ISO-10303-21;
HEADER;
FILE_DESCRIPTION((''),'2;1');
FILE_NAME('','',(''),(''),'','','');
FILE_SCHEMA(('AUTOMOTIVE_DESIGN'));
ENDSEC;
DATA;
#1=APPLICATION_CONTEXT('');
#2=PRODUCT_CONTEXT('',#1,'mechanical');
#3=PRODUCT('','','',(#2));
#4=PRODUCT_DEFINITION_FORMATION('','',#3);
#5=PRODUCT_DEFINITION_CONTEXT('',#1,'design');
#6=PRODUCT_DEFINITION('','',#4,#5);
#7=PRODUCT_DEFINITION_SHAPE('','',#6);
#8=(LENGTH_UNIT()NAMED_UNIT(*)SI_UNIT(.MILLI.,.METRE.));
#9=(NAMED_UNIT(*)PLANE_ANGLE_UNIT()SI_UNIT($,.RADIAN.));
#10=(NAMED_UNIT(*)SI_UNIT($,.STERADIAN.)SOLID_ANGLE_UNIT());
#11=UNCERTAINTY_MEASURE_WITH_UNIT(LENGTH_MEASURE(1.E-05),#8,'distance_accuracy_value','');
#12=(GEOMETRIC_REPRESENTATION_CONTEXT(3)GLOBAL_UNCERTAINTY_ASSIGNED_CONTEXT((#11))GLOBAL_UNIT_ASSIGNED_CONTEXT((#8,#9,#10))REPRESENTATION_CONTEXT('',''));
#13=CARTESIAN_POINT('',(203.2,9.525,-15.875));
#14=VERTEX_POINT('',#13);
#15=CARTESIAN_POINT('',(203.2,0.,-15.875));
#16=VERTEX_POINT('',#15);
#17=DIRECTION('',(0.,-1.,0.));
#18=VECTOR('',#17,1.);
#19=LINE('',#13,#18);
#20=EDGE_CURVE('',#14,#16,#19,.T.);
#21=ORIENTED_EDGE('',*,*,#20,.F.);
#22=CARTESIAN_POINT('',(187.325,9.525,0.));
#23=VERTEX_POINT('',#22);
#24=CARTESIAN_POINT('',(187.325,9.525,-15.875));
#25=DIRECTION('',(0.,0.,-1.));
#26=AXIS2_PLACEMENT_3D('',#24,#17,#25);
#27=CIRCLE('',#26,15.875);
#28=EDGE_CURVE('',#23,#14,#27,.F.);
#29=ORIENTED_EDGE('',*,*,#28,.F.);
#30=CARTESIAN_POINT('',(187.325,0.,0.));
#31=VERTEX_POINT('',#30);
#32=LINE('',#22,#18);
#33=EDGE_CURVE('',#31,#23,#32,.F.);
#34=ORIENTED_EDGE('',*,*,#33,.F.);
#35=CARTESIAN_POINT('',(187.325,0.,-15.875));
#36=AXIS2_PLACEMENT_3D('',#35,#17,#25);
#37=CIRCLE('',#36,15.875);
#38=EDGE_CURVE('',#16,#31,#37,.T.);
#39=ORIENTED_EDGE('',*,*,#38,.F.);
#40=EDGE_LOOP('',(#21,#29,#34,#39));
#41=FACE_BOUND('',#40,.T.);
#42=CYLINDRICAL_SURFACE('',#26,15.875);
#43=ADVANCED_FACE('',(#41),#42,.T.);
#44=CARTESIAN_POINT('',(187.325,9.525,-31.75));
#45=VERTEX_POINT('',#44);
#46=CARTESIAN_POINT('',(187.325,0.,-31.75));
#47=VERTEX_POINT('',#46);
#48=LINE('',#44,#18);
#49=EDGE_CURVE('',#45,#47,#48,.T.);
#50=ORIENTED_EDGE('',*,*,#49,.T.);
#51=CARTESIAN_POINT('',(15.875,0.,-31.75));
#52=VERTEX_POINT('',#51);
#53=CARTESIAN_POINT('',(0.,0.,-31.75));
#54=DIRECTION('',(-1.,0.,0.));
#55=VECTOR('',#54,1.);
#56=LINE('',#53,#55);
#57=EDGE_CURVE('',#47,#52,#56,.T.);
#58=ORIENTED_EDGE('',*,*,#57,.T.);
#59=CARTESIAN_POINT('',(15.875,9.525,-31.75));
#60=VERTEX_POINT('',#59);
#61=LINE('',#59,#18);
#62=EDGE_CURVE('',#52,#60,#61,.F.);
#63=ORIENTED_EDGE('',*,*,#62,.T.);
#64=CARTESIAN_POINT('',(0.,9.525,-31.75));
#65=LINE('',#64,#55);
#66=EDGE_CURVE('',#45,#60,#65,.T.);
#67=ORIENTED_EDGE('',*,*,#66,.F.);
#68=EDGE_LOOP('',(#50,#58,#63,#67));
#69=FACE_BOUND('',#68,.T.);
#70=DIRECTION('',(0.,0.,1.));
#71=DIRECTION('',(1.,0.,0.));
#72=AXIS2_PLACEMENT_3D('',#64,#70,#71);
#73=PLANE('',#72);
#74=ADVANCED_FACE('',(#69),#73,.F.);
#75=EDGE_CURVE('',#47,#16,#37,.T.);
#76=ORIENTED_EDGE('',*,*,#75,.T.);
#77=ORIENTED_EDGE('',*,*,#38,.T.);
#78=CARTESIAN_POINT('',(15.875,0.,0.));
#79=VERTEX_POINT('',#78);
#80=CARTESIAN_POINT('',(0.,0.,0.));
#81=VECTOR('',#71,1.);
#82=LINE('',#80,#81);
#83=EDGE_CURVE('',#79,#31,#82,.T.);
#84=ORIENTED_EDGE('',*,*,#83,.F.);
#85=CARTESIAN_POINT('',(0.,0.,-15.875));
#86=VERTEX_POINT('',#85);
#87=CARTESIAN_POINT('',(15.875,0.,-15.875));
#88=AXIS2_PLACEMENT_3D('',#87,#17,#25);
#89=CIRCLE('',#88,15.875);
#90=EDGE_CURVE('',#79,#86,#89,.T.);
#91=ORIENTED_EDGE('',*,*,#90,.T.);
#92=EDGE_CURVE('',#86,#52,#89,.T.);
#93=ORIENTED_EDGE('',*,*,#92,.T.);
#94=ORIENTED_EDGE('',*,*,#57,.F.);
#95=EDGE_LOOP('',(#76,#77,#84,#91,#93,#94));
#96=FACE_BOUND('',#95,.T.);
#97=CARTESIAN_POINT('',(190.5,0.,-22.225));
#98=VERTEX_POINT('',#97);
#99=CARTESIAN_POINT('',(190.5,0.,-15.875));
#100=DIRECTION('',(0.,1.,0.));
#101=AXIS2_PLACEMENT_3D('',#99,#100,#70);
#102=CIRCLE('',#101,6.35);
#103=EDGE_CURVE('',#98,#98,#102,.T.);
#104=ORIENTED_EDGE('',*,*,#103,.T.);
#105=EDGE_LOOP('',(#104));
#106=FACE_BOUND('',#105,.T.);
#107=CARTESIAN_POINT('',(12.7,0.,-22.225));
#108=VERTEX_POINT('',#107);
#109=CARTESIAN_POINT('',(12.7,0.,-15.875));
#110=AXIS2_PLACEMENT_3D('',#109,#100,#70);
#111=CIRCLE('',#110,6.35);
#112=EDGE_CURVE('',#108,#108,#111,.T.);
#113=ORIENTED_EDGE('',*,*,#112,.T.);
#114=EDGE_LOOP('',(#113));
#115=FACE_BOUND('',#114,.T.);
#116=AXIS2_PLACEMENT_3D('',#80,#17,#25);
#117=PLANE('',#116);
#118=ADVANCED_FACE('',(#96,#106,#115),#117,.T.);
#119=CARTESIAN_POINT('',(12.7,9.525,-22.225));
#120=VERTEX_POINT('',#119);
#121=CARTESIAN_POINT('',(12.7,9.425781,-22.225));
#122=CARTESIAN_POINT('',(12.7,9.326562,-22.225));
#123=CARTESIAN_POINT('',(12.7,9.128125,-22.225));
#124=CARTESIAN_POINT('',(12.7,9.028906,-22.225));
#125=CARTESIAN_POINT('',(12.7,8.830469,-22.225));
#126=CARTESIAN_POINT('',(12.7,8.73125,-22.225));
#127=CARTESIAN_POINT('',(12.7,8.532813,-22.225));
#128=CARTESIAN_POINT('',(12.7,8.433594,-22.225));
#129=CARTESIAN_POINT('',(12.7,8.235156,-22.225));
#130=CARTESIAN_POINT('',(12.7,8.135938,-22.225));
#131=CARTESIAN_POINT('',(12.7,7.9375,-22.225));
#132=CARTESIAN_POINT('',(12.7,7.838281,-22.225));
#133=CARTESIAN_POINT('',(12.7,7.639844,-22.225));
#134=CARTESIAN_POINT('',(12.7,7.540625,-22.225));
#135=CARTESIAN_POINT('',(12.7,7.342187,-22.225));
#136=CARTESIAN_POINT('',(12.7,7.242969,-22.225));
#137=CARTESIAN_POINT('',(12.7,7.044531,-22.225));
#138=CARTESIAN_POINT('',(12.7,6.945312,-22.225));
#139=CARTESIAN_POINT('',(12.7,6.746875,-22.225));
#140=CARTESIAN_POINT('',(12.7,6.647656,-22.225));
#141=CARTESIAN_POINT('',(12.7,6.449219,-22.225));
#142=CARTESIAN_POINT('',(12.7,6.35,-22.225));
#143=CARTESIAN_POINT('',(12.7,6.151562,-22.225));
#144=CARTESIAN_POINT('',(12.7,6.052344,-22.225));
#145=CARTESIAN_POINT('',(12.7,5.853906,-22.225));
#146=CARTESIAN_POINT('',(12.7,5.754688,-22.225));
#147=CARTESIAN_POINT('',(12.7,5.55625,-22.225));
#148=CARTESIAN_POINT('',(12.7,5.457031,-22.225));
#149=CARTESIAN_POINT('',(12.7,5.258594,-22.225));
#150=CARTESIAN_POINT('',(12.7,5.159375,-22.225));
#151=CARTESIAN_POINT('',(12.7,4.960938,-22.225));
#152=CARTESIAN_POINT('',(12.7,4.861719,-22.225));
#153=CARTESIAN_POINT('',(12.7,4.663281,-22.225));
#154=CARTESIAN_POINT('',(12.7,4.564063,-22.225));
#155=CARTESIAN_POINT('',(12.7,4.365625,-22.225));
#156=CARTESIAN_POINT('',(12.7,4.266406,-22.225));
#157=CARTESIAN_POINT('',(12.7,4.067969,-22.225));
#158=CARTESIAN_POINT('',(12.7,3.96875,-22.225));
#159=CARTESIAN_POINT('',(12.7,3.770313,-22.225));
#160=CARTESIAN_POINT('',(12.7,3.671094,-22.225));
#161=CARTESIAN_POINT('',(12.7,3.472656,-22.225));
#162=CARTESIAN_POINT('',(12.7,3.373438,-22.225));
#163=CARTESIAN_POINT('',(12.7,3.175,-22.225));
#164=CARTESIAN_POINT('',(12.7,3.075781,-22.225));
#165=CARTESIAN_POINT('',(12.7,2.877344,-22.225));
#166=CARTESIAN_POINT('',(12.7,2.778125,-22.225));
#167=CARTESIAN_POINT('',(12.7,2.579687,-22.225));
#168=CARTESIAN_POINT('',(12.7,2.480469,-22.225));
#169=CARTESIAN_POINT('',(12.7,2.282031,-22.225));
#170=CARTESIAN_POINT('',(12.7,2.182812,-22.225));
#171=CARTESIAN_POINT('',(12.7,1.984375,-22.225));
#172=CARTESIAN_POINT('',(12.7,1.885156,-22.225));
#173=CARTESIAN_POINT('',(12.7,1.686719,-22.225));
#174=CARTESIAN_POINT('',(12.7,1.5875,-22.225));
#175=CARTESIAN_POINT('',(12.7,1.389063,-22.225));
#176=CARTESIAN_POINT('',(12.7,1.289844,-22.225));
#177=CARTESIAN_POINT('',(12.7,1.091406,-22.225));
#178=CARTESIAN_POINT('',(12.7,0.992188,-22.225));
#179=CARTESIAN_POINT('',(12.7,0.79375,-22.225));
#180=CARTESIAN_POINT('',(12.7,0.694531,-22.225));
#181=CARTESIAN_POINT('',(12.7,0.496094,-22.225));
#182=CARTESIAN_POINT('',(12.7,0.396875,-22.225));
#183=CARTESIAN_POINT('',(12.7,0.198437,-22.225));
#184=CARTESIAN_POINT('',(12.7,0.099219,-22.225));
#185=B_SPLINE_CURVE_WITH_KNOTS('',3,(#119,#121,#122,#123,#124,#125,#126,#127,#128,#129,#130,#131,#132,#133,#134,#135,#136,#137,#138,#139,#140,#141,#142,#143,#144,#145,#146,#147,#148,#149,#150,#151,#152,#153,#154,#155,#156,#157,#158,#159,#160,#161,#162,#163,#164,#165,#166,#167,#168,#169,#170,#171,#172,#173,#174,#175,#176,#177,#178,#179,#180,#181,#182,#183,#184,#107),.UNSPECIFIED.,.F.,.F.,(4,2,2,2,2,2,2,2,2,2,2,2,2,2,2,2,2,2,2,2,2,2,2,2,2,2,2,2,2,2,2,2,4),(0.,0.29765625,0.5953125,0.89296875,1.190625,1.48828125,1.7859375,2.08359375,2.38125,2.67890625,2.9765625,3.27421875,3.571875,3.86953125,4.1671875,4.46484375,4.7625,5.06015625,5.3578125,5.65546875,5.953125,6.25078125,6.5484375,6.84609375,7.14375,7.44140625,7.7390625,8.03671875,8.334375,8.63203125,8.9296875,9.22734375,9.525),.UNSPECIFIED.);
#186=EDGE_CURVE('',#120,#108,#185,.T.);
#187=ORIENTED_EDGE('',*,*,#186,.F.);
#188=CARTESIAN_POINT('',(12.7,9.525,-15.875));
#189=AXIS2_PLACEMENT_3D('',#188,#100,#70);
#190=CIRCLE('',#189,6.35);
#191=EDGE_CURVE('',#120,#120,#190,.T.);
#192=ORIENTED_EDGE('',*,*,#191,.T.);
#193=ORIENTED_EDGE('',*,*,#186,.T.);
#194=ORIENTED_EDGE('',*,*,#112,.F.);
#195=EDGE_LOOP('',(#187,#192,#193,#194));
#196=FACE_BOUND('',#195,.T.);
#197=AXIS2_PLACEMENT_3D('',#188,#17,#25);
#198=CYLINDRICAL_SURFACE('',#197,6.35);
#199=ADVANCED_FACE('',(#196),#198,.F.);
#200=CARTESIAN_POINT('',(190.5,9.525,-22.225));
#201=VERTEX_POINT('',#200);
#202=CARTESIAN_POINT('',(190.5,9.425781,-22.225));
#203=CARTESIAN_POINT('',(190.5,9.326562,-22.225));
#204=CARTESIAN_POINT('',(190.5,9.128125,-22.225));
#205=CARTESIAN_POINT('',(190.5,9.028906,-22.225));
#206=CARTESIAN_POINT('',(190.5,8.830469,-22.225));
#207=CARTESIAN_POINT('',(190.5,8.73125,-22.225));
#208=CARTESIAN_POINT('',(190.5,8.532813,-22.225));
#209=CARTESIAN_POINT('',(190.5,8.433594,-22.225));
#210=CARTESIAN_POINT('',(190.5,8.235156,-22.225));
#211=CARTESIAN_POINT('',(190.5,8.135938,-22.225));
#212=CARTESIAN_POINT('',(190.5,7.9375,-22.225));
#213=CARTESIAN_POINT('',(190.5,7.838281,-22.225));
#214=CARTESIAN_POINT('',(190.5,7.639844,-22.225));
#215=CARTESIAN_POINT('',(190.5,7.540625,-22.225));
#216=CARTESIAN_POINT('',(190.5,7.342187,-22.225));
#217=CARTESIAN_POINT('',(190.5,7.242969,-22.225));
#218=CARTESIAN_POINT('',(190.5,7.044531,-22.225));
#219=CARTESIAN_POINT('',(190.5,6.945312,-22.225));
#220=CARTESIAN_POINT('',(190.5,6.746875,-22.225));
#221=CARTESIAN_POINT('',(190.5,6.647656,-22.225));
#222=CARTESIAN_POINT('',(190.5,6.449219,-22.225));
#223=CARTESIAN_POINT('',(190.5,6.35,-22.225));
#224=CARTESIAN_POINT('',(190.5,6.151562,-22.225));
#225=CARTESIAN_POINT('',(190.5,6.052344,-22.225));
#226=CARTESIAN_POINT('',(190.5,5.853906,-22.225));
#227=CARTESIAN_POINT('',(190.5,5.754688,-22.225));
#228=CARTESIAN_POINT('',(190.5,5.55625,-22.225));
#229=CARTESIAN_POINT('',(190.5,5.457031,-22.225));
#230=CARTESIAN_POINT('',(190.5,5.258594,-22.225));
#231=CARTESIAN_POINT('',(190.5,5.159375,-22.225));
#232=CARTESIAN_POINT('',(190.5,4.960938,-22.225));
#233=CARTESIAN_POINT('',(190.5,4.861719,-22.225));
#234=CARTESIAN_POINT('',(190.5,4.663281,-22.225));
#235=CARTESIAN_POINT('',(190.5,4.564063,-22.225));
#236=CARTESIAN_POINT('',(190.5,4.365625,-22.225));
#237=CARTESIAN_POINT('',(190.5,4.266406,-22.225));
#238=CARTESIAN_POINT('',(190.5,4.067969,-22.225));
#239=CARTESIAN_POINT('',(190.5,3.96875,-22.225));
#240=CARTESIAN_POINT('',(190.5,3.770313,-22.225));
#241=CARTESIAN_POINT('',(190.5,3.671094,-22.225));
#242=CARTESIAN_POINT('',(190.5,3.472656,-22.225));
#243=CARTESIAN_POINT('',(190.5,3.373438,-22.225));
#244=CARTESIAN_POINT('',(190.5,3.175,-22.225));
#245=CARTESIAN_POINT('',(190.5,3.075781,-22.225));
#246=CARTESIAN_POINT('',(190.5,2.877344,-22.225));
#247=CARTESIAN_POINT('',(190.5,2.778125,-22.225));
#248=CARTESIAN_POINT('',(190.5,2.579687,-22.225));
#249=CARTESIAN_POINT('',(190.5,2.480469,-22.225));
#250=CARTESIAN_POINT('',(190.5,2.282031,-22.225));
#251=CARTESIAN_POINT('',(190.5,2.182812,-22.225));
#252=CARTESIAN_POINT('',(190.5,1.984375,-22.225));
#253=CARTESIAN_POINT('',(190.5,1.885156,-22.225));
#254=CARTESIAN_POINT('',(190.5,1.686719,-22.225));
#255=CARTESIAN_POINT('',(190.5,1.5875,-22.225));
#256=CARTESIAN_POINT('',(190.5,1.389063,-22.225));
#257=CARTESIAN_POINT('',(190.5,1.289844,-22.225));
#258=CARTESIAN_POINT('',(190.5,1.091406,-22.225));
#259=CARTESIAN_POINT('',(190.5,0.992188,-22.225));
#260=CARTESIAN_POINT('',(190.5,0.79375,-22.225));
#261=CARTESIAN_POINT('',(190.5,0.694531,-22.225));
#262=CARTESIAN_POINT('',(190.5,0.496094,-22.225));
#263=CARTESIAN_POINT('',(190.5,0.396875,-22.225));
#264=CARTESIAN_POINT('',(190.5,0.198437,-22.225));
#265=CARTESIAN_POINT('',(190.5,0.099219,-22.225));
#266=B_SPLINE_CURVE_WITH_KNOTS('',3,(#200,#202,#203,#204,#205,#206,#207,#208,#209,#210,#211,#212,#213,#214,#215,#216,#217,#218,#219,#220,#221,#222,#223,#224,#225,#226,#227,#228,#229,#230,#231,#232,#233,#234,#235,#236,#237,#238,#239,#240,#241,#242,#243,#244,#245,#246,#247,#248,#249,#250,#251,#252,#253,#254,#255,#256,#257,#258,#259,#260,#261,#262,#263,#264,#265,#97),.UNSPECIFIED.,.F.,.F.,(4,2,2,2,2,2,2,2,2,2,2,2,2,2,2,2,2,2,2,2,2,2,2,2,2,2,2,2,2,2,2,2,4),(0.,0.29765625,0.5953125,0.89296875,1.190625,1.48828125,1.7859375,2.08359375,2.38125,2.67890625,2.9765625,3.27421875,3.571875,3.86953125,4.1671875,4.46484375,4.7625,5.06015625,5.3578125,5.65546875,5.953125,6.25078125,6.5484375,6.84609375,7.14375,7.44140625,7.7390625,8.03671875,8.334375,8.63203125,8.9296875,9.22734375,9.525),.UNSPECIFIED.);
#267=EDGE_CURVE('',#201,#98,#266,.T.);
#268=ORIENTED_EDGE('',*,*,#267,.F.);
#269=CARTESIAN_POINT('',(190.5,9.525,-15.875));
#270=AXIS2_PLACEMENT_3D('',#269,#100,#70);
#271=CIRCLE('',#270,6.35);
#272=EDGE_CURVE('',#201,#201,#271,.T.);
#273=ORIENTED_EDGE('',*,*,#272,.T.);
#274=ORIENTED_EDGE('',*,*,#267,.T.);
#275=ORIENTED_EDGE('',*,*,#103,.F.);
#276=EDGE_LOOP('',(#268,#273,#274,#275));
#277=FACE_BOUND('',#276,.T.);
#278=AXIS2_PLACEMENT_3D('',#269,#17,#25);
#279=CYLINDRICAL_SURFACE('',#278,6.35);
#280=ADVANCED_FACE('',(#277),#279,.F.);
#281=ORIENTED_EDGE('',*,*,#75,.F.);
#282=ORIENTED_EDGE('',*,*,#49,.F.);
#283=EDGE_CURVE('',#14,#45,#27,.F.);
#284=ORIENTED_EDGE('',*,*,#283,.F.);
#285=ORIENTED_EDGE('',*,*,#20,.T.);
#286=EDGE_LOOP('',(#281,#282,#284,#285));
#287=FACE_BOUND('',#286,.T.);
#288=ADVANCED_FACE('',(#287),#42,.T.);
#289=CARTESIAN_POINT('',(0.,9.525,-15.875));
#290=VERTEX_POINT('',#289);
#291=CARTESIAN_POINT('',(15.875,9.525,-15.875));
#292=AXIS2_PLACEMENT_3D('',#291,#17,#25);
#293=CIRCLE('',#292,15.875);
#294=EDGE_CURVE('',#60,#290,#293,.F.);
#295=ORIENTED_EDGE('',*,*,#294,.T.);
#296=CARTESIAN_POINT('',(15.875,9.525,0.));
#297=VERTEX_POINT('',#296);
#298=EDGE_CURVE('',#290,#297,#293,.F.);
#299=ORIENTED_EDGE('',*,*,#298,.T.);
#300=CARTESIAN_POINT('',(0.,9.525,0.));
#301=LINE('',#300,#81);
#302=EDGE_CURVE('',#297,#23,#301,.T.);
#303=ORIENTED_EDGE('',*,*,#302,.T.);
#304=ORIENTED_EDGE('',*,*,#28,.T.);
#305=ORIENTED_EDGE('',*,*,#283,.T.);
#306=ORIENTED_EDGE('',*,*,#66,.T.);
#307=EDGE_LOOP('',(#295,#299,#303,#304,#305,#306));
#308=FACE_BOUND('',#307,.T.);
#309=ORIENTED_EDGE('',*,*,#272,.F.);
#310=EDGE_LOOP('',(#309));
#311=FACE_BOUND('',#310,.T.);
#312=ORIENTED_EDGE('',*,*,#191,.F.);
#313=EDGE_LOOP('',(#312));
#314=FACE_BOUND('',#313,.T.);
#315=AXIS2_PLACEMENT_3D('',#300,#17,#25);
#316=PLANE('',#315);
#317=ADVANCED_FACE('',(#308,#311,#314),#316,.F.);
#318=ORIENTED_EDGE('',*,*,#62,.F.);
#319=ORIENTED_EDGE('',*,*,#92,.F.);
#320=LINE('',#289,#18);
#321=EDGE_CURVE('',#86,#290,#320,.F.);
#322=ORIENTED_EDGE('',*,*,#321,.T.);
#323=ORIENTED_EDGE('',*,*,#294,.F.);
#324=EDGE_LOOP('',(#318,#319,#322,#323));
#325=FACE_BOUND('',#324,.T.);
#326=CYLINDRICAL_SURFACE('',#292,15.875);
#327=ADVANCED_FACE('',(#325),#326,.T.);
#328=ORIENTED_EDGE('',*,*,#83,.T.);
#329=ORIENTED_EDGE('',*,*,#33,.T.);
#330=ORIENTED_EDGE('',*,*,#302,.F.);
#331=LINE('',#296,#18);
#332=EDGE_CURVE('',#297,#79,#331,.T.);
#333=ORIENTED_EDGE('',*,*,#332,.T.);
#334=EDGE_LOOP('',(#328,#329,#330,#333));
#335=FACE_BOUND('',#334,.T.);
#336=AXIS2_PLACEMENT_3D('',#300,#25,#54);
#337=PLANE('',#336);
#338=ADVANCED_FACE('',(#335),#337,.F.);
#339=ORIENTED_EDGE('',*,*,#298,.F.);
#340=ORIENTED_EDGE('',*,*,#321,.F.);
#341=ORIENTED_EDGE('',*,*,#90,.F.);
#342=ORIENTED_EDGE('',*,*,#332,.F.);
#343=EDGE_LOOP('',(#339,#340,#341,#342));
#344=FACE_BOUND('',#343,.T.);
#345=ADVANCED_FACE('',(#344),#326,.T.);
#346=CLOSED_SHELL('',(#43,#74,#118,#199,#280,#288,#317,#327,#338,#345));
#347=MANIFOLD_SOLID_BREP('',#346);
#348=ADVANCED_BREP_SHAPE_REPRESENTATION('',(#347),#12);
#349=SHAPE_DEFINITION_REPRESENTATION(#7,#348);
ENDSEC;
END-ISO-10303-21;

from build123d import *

# Parameters (mm, degrees)
SKETCH1_W           = 203.2
SKETCH1_H           = 31.75
SKETCH1_R           = 6.35
BOSS_EXTRUDE1_DEPTH = 9.525
FILLET1_R           = 15.875


with BuildPart() as part:
    # Sketch1 → Boss-Extrude1 (new body)
    with BuildSketch(Plane(origin=(0, 0, 0), x_dir=(1, 0, 0), z_dir=(0, 1, 0))):
        with Locations((101.6, 15.875)):
            Rectangle(SKETCH1_W, SKETCH1_H)
        with Locations(Location((12.7, 15.875, 0), (0, 0, 90))):
            Circle(SKETCH1_R, mode=Mode.SUBTRACT)
        with Locations(Location((190.5, 15.875, 0), (0, 0, 90))):
            Circle(SKETCH1_R, mode=Mode.SUBTRACT)
    extrude(amount=BOSS_EXTRUDE1_DEPTH)

    # Fillet1
    fillet1_edges = [part.edges().sort_by_distance(p)[0] for p in [
        (203.2, 4.7625, -31.75),
        (203.2, 4.7625, 0),
        (0, 4.7625, -31.75),
        (0, 4.7625, 0),
    ]]
    fillet(fillet1_edges, radius=FILLET1_R - 0.0001)  # a hair under: the kernel refuses the full size


solid = part.part
